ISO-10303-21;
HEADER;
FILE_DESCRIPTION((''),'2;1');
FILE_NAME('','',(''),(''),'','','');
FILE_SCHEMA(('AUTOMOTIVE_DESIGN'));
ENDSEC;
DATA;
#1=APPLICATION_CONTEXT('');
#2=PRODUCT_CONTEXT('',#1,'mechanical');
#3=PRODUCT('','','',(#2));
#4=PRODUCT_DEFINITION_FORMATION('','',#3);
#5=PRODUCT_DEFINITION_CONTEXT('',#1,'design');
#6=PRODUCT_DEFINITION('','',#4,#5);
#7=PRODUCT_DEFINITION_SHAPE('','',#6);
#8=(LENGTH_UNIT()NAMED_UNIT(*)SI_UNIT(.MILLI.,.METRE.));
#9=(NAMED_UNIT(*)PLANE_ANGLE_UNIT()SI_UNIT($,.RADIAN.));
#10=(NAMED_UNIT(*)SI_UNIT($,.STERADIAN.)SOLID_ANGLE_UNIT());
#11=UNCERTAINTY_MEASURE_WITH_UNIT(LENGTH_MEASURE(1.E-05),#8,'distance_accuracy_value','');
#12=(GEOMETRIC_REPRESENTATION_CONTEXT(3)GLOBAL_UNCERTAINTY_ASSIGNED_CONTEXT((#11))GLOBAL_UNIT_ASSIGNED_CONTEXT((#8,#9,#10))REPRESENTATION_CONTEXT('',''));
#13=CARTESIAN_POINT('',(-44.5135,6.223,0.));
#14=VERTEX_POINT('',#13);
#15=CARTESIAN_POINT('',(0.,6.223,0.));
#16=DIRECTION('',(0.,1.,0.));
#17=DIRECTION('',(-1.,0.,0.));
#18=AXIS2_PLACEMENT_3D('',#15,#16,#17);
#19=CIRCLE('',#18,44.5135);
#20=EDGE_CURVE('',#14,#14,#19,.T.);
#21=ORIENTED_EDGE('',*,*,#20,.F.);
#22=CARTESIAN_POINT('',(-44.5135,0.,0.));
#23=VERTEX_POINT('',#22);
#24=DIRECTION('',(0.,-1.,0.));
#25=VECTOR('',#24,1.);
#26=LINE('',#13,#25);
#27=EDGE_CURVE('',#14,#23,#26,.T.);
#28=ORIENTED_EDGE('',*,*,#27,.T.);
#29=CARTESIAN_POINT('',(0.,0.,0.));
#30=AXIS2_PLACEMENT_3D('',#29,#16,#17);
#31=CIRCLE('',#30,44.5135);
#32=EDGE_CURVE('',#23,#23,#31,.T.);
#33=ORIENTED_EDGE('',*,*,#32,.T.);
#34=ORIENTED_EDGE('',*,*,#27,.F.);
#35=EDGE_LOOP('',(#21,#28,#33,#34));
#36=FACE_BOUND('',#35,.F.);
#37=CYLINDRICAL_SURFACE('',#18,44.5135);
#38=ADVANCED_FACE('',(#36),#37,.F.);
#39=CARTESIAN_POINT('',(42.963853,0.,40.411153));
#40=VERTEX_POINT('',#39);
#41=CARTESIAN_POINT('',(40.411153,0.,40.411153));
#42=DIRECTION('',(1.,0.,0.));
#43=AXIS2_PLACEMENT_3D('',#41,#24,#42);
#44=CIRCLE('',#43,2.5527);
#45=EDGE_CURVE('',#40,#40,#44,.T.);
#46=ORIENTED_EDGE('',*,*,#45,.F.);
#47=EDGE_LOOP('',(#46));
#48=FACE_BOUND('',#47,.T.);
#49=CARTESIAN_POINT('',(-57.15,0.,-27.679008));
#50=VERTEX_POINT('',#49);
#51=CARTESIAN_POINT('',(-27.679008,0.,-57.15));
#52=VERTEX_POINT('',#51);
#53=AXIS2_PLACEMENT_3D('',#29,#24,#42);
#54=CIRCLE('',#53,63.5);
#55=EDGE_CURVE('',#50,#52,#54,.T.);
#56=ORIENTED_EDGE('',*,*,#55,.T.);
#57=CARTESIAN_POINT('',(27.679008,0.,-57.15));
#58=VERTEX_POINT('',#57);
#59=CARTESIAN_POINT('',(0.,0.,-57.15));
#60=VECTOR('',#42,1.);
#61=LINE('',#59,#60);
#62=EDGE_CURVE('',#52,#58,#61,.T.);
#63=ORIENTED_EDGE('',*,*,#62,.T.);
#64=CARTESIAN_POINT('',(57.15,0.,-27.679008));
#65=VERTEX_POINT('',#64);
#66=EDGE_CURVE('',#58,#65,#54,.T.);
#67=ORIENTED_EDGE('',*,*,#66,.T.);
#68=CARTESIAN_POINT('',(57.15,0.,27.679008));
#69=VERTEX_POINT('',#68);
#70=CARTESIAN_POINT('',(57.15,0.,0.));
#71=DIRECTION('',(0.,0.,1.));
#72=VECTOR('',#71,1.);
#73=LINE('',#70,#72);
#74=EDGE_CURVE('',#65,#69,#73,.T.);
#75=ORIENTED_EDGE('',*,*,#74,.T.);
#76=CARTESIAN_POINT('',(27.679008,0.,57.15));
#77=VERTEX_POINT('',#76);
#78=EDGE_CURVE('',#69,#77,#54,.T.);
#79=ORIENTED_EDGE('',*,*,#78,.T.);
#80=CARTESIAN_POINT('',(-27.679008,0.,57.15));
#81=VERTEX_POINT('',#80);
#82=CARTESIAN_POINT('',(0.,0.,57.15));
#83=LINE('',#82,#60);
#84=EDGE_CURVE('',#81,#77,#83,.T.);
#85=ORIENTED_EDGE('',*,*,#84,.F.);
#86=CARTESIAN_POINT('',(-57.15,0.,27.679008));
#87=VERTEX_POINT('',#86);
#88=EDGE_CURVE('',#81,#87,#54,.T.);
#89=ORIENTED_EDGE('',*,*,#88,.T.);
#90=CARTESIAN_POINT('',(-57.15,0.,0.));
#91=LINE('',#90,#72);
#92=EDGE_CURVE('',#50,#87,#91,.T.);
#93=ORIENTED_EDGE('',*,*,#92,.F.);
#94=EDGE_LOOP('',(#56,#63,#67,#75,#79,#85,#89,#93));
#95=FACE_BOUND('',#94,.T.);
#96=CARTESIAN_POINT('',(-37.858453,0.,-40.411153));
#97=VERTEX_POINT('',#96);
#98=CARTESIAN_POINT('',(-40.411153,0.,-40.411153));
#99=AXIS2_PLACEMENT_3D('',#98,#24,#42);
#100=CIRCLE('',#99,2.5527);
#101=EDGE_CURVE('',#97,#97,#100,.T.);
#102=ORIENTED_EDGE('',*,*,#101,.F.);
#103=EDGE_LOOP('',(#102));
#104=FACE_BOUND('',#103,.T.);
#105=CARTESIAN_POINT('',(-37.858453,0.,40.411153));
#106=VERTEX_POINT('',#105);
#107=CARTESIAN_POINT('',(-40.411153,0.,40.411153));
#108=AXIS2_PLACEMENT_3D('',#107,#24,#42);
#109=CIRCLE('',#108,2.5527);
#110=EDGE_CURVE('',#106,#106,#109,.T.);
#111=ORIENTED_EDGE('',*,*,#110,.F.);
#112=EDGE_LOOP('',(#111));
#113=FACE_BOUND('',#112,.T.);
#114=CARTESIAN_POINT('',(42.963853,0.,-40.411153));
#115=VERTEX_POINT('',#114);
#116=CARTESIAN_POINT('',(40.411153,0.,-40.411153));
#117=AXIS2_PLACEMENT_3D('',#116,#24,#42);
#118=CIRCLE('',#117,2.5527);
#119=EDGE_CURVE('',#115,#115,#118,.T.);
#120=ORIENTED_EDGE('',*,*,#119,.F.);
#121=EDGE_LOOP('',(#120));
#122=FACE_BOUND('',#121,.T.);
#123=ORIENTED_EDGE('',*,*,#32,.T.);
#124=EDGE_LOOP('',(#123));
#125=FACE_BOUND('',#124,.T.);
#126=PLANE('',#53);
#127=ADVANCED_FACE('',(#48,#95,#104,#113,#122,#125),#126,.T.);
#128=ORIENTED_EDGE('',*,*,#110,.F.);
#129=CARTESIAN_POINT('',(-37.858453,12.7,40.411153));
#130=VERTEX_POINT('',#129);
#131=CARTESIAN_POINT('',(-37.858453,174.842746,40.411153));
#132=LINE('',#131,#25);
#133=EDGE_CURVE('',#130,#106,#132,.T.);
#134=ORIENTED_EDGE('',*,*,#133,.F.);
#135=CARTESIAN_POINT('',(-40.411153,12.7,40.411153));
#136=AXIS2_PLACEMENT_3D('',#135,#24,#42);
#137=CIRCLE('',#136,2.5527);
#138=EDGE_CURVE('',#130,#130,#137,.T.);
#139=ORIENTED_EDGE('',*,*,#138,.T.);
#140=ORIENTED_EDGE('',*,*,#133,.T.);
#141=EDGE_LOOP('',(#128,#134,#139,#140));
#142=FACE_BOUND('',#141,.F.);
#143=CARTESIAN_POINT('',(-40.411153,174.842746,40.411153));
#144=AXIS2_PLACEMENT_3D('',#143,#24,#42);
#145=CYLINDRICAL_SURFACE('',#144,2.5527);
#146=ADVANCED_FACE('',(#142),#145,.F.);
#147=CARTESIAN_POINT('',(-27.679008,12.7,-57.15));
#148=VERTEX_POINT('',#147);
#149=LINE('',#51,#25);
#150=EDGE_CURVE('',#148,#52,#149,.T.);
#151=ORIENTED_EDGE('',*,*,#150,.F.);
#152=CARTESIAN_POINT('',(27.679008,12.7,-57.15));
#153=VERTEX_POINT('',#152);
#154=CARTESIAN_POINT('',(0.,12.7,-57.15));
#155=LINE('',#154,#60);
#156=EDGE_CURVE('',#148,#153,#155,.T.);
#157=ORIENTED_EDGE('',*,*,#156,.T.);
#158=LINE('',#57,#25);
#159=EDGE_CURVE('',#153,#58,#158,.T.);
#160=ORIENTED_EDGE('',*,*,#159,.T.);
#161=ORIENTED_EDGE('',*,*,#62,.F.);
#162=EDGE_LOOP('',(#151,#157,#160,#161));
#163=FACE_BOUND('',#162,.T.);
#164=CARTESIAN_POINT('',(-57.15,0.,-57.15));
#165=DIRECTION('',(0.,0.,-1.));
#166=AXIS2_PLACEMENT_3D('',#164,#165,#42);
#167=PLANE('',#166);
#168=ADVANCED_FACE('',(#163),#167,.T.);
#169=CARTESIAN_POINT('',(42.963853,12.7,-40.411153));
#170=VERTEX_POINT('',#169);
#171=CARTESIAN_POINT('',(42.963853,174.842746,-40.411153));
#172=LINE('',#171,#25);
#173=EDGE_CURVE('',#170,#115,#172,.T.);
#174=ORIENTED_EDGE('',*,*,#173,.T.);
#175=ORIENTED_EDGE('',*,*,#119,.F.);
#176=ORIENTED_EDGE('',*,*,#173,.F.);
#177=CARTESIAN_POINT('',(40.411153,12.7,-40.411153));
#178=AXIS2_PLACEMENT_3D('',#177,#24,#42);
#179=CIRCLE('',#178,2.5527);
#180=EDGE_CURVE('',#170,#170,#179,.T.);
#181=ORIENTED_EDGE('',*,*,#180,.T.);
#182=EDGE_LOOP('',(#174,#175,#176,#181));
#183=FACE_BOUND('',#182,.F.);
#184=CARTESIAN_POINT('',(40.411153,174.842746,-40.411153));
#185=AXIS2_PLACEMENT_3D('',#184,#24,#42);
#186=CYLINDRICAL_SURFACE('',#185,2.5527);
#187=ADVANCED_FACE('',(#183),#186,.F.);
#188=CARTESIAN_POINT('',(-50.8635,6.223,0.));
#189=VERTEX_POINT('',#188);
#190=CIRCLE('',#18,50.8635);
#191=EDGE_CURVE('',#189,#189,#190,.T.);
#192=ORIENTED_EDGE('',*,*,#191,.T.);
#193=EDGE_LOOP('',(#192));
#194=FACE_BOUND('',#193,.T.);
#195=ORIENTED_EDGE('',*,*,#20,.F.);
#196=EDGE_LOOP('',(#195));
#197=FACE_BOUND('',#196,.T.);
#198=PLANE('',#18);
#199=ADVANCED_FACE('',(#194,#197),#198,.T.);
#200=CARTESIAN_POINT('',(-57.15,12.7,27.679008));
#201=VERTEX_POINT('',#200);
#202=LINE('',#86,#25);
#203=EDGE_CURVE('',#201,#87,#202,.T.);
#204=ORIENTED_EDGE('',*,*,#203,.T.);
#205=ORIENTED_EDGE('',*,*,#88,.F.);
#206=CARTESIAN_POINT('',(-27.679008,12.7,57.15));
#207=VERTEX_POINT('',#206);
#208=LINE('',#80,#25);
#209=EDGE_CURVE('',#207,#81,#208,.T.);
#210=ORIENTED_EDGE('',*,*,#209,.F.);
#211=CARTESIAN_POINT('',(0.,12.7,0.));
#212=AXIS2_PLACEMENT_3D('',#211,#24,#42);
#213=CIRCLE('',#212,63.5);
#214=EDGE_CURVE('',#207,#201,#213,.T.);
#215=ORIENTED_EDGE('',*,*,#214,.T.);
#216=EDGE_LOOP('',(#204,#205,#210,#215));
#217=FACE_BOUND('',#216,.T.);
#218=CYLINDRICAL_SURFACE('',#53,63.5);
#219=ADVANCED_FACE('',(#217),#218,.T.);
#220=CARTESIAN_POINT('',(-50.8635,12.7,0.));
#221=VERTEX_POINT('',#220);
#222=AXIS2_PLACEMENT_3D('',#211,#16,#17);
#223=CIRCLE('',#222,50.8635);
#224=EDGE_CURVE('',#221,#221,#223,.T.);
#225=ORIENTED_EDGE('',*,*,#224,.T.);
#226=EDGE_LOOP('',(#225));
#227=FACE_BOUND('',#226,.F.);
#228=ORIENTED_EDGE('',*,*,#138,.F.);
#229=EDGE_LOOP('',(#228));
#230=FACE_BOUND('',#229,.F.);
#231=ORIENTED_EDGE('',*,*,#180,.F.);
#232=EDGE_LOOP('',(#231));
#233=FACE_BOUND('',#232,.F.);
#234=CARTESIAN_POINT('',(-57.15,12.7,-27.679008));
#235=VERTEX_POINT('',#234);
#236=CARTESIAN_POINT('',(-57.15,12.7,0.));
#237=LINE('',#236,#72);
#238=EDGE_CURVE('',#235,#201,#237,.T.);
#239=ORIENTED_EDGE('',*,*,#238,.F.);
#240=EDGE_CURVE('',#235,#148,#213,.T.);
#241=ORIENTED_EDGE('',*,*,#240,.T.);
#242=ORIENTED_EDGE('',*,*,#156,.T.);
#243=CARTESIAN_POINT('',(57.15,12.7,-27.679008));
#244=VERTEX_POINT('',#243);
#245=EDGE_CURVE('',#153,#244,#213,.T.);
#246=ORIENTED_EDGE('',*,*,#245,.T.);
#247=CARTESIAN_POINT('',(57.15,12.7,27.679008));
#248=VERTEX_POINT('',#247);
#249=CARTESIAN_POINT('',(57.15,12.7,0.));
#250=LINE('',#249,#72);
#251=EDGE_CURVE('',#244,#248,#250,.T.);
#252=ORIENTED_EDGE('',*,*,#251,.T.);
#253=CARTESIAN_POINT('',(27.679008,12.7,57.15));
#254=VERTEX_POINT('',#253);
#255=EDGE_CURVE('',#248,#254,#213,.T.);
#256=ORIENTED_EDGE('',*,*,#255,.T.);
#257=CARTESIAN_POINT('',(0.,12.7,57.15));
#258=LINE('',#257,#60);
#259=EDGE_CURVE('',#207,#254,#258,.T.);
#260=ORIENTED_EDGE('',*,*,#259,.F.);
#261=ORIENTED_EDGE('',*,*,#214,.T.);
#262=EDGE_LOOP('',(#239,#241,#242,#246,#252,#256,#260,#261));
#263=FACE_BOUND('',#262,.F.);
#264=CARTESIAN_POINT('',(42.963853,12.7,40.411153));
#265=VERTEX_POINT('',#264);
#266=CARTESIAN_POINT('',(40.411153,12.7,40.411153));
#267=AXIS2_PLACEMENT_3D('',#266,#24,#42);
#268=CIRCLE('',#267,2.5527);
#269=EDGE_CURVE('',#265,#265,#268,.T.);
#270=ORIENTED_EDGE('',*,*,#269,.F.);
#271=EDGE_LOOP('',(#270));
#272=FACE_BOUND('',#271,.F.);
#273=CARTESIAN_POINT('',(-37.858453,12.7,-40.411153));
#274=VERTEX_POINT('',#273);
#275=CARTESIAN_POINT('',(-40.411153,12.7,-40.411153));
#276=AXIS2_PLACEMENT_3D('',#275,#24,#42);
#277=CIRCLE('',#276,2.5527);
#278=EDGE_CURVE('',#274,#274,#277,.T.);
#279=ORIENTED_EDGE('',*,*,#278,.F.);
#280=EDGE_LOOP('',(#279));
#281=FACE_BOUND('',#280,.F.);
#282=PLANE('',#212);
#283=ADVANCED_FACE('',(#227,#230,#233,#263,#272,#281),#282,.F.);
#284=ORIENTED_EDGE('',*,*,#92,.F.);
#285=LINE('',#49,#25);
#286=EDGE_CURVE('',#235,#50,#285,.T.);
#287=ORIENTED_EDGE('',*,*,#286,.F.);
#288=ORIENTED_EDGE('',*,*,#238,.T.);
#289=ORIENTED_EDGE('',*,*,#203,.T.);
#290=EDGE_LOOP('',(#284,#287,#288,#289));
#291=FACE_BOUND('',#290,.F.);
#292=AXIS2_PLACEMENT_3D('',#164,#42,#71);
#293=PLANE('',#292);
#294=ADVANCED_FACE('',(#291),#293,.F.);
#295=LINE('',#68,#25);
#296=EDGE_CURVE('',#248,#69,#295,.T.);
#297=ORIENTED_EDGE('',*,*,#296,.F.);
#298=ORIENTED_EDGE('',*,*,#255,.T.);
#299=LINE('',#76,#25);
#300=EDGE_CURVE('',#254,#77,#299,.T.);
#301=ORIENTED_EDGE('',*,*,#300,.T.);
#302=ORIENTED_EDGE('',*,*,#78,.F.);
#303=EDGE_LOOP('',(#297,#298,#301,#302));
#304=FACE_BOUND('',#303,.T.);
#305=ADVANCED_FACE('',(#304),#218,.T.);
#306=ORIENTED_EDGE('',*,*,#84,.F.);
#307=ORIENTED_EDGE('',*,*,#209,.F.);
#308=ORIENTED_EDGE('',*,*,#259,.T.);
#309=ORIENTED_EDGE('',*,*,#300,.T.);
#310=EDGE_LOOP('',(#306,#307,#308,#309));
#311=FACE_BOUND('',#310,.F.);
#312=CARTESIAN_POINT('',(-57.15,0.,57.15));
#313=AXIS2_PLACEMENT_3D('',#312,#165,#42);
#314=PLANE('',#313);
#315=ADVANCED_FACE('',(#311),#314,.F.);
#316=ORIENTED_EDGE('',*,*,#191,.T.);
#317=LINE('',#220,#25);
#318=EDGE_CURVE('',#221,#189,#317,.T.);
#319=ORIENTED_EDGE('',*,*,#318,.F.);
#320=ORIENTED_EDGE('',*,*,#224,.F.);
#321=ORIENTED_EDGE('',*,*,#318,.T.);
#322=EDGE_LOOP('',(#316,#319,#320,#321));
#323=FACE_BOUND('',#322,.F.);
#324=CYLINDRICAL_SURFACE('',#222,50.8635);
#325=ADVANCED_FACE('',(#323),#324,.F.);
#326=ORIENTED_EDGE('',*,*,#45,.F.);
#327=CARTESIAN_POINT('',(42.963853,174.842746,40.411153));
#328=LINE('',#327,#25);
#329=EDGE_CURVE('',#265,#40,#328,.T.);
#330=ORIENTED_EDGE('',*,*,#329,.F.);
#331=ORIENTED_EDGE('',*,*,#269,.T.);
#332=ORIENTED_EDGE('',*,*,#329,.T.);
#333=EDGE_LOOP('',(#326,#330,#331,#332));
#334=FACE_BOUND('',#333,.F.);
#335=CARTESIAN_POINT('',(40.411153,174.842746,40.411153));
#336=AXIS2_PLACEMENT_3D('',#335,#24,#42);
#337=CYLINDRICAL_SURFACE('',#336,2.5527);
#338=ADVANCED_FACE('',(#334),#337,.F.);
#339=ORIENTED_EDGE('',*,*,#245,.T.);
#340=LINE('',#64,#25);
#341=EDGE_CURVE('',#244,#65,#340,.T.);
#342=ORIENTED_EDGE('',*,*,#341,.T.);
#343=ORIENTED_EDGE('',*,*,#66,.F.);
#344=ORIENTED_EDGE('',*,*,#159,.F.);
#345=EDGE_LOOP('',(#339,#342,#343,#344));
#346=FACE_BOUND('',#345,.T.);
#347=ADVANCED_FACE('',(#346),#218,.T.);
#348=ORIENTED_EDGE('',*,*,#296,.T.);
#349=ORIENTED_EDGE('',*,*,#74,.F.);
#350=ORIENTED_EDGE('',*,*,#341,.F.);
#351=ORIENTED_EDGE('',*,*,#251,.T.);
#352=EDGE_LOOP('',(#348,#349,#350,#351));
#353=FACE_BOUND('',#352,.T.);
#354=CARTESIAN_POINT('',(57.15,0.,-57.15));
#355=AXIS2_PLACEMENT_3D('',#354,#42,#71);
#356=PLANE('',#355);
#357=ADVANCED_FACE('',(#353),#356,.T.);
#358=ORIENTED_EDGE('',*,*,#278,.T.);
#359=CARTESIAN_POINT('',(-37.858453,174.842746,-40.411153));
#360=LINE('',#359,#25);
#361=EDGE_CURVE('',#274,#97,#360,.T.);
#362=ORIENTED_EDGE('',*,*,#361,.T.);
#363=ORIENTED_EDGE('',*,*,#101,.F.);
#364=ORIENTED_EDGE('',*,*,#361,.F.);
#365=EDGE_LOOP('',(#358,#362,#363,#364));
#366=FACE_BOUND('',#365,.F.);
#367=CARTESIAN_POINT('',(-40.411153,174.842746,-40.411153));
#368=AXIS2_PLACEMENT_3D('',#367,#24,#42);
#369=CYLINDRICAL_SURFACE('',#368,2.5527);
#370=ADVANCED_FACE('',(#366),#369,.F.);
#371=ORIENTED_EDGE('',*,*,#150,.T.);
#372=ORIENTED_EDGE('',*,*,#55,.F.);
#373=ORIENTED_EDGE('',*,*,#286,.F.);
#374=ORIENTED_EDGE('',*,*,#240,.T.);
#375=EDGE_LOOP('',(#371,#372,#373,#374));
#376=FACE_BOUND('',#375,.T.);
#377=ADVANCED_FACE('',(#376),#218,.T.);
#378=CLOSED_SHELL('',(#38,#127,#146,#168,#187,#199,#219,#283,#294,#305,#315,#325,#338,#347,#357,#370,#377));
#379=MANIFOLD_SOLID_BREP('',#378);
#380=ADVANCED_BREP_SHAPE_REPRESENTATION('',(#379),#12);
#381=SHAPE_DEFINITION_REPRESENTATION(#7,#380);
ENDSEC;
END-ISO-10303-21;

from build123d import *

# Parameters (mm, degrees)
F0_W      = 114.3
F0_H      = 114.3
F1_DEPTH  = 12.7
F2_R      = 50.8635
F3_DEPTH  = 6.477
F4_R      = 44.5135
F5_DEPTH  = 6.224
F6_R      = 9.525
F8_D      = 5.1054
F9_R      = 110.5427806282
F9_R_2    = 63.5
F10_DEPTH = 25.4
F12_D     = 5.1054


with BuildPart() as f1:
    # F0 (on Front) → F1 (new body)
    with BuildSketch(Plane.XZ):
        Rectangle(F0_W, F0_H)
    extrude(amount=-F1_DEPTH)

    # F2 (on face) → F3 (cut)
    with BuildSketch(Plane(origin=(0, 12.7, 0), x_dir=(-1, 0, 0), z_dir=(0, 1, 0))):
        Circle(F2_R)
    extrude(amount=-F3_DEPTH, mode=Mode.SUBTRACT)

    # F4 (on face) → F5 (cut, through all)
    with BuildSketch(Plane(origin=(0, 6.223, 0), x_dir=(-1, 0, 0), z_dir=(0, 1, 0))):
        Circle(F4_R)
    extrude(amount=-F5_DEPTH, mode=Mode.SUBTRACT)

    # F6
    f6_edges = [f1.edges().sort_by_distance(p)[0] for p in [
        (57.15, 6.35, 57.15),
        (-57.15, 6.35, 57.15),
        (57.15, 6.35, -57.15),
        (-57.15, 6.35, -57.15),
    ]]
    fillet(f6_edges, radius=F6_R)

    # F8 (through all)
    with Locations(Plane(origin=(0, 12.7, 0), x_dir=(-1, 0, 0), z_dir=(0, 1, 0))):
        with Locations((-47.625, 47.625), (47.625, -47.625), (47.625, 47.625), (-47.625, -47.625)):
            Hole(F8_D / 2)

    # F9 (on Front) → F10 (cut)
    with BuildSketch(Plane.XZ):
        Circle(F9_R)
        Circle(F9_R_2, mode=Mode.SUBTRACT)
    extrude(amount=-F10_DEPTH, mode=Mode.SUBTRACT)

    # F12 (through all)
    with Locations(Plane(origin=(0, 12.7, 0), x_dir=(-1, 0, 0), z_dir=(0, 1, 0))):
        with Locations((40.4111525448, 40.4111525448), (-40.4111525448, 40.4111525448), (-40.4111525448, -40.4111525448), (40.4111525448, -40.4111525448)):
            Hole(F12_D / 2)


solid = f1.part
